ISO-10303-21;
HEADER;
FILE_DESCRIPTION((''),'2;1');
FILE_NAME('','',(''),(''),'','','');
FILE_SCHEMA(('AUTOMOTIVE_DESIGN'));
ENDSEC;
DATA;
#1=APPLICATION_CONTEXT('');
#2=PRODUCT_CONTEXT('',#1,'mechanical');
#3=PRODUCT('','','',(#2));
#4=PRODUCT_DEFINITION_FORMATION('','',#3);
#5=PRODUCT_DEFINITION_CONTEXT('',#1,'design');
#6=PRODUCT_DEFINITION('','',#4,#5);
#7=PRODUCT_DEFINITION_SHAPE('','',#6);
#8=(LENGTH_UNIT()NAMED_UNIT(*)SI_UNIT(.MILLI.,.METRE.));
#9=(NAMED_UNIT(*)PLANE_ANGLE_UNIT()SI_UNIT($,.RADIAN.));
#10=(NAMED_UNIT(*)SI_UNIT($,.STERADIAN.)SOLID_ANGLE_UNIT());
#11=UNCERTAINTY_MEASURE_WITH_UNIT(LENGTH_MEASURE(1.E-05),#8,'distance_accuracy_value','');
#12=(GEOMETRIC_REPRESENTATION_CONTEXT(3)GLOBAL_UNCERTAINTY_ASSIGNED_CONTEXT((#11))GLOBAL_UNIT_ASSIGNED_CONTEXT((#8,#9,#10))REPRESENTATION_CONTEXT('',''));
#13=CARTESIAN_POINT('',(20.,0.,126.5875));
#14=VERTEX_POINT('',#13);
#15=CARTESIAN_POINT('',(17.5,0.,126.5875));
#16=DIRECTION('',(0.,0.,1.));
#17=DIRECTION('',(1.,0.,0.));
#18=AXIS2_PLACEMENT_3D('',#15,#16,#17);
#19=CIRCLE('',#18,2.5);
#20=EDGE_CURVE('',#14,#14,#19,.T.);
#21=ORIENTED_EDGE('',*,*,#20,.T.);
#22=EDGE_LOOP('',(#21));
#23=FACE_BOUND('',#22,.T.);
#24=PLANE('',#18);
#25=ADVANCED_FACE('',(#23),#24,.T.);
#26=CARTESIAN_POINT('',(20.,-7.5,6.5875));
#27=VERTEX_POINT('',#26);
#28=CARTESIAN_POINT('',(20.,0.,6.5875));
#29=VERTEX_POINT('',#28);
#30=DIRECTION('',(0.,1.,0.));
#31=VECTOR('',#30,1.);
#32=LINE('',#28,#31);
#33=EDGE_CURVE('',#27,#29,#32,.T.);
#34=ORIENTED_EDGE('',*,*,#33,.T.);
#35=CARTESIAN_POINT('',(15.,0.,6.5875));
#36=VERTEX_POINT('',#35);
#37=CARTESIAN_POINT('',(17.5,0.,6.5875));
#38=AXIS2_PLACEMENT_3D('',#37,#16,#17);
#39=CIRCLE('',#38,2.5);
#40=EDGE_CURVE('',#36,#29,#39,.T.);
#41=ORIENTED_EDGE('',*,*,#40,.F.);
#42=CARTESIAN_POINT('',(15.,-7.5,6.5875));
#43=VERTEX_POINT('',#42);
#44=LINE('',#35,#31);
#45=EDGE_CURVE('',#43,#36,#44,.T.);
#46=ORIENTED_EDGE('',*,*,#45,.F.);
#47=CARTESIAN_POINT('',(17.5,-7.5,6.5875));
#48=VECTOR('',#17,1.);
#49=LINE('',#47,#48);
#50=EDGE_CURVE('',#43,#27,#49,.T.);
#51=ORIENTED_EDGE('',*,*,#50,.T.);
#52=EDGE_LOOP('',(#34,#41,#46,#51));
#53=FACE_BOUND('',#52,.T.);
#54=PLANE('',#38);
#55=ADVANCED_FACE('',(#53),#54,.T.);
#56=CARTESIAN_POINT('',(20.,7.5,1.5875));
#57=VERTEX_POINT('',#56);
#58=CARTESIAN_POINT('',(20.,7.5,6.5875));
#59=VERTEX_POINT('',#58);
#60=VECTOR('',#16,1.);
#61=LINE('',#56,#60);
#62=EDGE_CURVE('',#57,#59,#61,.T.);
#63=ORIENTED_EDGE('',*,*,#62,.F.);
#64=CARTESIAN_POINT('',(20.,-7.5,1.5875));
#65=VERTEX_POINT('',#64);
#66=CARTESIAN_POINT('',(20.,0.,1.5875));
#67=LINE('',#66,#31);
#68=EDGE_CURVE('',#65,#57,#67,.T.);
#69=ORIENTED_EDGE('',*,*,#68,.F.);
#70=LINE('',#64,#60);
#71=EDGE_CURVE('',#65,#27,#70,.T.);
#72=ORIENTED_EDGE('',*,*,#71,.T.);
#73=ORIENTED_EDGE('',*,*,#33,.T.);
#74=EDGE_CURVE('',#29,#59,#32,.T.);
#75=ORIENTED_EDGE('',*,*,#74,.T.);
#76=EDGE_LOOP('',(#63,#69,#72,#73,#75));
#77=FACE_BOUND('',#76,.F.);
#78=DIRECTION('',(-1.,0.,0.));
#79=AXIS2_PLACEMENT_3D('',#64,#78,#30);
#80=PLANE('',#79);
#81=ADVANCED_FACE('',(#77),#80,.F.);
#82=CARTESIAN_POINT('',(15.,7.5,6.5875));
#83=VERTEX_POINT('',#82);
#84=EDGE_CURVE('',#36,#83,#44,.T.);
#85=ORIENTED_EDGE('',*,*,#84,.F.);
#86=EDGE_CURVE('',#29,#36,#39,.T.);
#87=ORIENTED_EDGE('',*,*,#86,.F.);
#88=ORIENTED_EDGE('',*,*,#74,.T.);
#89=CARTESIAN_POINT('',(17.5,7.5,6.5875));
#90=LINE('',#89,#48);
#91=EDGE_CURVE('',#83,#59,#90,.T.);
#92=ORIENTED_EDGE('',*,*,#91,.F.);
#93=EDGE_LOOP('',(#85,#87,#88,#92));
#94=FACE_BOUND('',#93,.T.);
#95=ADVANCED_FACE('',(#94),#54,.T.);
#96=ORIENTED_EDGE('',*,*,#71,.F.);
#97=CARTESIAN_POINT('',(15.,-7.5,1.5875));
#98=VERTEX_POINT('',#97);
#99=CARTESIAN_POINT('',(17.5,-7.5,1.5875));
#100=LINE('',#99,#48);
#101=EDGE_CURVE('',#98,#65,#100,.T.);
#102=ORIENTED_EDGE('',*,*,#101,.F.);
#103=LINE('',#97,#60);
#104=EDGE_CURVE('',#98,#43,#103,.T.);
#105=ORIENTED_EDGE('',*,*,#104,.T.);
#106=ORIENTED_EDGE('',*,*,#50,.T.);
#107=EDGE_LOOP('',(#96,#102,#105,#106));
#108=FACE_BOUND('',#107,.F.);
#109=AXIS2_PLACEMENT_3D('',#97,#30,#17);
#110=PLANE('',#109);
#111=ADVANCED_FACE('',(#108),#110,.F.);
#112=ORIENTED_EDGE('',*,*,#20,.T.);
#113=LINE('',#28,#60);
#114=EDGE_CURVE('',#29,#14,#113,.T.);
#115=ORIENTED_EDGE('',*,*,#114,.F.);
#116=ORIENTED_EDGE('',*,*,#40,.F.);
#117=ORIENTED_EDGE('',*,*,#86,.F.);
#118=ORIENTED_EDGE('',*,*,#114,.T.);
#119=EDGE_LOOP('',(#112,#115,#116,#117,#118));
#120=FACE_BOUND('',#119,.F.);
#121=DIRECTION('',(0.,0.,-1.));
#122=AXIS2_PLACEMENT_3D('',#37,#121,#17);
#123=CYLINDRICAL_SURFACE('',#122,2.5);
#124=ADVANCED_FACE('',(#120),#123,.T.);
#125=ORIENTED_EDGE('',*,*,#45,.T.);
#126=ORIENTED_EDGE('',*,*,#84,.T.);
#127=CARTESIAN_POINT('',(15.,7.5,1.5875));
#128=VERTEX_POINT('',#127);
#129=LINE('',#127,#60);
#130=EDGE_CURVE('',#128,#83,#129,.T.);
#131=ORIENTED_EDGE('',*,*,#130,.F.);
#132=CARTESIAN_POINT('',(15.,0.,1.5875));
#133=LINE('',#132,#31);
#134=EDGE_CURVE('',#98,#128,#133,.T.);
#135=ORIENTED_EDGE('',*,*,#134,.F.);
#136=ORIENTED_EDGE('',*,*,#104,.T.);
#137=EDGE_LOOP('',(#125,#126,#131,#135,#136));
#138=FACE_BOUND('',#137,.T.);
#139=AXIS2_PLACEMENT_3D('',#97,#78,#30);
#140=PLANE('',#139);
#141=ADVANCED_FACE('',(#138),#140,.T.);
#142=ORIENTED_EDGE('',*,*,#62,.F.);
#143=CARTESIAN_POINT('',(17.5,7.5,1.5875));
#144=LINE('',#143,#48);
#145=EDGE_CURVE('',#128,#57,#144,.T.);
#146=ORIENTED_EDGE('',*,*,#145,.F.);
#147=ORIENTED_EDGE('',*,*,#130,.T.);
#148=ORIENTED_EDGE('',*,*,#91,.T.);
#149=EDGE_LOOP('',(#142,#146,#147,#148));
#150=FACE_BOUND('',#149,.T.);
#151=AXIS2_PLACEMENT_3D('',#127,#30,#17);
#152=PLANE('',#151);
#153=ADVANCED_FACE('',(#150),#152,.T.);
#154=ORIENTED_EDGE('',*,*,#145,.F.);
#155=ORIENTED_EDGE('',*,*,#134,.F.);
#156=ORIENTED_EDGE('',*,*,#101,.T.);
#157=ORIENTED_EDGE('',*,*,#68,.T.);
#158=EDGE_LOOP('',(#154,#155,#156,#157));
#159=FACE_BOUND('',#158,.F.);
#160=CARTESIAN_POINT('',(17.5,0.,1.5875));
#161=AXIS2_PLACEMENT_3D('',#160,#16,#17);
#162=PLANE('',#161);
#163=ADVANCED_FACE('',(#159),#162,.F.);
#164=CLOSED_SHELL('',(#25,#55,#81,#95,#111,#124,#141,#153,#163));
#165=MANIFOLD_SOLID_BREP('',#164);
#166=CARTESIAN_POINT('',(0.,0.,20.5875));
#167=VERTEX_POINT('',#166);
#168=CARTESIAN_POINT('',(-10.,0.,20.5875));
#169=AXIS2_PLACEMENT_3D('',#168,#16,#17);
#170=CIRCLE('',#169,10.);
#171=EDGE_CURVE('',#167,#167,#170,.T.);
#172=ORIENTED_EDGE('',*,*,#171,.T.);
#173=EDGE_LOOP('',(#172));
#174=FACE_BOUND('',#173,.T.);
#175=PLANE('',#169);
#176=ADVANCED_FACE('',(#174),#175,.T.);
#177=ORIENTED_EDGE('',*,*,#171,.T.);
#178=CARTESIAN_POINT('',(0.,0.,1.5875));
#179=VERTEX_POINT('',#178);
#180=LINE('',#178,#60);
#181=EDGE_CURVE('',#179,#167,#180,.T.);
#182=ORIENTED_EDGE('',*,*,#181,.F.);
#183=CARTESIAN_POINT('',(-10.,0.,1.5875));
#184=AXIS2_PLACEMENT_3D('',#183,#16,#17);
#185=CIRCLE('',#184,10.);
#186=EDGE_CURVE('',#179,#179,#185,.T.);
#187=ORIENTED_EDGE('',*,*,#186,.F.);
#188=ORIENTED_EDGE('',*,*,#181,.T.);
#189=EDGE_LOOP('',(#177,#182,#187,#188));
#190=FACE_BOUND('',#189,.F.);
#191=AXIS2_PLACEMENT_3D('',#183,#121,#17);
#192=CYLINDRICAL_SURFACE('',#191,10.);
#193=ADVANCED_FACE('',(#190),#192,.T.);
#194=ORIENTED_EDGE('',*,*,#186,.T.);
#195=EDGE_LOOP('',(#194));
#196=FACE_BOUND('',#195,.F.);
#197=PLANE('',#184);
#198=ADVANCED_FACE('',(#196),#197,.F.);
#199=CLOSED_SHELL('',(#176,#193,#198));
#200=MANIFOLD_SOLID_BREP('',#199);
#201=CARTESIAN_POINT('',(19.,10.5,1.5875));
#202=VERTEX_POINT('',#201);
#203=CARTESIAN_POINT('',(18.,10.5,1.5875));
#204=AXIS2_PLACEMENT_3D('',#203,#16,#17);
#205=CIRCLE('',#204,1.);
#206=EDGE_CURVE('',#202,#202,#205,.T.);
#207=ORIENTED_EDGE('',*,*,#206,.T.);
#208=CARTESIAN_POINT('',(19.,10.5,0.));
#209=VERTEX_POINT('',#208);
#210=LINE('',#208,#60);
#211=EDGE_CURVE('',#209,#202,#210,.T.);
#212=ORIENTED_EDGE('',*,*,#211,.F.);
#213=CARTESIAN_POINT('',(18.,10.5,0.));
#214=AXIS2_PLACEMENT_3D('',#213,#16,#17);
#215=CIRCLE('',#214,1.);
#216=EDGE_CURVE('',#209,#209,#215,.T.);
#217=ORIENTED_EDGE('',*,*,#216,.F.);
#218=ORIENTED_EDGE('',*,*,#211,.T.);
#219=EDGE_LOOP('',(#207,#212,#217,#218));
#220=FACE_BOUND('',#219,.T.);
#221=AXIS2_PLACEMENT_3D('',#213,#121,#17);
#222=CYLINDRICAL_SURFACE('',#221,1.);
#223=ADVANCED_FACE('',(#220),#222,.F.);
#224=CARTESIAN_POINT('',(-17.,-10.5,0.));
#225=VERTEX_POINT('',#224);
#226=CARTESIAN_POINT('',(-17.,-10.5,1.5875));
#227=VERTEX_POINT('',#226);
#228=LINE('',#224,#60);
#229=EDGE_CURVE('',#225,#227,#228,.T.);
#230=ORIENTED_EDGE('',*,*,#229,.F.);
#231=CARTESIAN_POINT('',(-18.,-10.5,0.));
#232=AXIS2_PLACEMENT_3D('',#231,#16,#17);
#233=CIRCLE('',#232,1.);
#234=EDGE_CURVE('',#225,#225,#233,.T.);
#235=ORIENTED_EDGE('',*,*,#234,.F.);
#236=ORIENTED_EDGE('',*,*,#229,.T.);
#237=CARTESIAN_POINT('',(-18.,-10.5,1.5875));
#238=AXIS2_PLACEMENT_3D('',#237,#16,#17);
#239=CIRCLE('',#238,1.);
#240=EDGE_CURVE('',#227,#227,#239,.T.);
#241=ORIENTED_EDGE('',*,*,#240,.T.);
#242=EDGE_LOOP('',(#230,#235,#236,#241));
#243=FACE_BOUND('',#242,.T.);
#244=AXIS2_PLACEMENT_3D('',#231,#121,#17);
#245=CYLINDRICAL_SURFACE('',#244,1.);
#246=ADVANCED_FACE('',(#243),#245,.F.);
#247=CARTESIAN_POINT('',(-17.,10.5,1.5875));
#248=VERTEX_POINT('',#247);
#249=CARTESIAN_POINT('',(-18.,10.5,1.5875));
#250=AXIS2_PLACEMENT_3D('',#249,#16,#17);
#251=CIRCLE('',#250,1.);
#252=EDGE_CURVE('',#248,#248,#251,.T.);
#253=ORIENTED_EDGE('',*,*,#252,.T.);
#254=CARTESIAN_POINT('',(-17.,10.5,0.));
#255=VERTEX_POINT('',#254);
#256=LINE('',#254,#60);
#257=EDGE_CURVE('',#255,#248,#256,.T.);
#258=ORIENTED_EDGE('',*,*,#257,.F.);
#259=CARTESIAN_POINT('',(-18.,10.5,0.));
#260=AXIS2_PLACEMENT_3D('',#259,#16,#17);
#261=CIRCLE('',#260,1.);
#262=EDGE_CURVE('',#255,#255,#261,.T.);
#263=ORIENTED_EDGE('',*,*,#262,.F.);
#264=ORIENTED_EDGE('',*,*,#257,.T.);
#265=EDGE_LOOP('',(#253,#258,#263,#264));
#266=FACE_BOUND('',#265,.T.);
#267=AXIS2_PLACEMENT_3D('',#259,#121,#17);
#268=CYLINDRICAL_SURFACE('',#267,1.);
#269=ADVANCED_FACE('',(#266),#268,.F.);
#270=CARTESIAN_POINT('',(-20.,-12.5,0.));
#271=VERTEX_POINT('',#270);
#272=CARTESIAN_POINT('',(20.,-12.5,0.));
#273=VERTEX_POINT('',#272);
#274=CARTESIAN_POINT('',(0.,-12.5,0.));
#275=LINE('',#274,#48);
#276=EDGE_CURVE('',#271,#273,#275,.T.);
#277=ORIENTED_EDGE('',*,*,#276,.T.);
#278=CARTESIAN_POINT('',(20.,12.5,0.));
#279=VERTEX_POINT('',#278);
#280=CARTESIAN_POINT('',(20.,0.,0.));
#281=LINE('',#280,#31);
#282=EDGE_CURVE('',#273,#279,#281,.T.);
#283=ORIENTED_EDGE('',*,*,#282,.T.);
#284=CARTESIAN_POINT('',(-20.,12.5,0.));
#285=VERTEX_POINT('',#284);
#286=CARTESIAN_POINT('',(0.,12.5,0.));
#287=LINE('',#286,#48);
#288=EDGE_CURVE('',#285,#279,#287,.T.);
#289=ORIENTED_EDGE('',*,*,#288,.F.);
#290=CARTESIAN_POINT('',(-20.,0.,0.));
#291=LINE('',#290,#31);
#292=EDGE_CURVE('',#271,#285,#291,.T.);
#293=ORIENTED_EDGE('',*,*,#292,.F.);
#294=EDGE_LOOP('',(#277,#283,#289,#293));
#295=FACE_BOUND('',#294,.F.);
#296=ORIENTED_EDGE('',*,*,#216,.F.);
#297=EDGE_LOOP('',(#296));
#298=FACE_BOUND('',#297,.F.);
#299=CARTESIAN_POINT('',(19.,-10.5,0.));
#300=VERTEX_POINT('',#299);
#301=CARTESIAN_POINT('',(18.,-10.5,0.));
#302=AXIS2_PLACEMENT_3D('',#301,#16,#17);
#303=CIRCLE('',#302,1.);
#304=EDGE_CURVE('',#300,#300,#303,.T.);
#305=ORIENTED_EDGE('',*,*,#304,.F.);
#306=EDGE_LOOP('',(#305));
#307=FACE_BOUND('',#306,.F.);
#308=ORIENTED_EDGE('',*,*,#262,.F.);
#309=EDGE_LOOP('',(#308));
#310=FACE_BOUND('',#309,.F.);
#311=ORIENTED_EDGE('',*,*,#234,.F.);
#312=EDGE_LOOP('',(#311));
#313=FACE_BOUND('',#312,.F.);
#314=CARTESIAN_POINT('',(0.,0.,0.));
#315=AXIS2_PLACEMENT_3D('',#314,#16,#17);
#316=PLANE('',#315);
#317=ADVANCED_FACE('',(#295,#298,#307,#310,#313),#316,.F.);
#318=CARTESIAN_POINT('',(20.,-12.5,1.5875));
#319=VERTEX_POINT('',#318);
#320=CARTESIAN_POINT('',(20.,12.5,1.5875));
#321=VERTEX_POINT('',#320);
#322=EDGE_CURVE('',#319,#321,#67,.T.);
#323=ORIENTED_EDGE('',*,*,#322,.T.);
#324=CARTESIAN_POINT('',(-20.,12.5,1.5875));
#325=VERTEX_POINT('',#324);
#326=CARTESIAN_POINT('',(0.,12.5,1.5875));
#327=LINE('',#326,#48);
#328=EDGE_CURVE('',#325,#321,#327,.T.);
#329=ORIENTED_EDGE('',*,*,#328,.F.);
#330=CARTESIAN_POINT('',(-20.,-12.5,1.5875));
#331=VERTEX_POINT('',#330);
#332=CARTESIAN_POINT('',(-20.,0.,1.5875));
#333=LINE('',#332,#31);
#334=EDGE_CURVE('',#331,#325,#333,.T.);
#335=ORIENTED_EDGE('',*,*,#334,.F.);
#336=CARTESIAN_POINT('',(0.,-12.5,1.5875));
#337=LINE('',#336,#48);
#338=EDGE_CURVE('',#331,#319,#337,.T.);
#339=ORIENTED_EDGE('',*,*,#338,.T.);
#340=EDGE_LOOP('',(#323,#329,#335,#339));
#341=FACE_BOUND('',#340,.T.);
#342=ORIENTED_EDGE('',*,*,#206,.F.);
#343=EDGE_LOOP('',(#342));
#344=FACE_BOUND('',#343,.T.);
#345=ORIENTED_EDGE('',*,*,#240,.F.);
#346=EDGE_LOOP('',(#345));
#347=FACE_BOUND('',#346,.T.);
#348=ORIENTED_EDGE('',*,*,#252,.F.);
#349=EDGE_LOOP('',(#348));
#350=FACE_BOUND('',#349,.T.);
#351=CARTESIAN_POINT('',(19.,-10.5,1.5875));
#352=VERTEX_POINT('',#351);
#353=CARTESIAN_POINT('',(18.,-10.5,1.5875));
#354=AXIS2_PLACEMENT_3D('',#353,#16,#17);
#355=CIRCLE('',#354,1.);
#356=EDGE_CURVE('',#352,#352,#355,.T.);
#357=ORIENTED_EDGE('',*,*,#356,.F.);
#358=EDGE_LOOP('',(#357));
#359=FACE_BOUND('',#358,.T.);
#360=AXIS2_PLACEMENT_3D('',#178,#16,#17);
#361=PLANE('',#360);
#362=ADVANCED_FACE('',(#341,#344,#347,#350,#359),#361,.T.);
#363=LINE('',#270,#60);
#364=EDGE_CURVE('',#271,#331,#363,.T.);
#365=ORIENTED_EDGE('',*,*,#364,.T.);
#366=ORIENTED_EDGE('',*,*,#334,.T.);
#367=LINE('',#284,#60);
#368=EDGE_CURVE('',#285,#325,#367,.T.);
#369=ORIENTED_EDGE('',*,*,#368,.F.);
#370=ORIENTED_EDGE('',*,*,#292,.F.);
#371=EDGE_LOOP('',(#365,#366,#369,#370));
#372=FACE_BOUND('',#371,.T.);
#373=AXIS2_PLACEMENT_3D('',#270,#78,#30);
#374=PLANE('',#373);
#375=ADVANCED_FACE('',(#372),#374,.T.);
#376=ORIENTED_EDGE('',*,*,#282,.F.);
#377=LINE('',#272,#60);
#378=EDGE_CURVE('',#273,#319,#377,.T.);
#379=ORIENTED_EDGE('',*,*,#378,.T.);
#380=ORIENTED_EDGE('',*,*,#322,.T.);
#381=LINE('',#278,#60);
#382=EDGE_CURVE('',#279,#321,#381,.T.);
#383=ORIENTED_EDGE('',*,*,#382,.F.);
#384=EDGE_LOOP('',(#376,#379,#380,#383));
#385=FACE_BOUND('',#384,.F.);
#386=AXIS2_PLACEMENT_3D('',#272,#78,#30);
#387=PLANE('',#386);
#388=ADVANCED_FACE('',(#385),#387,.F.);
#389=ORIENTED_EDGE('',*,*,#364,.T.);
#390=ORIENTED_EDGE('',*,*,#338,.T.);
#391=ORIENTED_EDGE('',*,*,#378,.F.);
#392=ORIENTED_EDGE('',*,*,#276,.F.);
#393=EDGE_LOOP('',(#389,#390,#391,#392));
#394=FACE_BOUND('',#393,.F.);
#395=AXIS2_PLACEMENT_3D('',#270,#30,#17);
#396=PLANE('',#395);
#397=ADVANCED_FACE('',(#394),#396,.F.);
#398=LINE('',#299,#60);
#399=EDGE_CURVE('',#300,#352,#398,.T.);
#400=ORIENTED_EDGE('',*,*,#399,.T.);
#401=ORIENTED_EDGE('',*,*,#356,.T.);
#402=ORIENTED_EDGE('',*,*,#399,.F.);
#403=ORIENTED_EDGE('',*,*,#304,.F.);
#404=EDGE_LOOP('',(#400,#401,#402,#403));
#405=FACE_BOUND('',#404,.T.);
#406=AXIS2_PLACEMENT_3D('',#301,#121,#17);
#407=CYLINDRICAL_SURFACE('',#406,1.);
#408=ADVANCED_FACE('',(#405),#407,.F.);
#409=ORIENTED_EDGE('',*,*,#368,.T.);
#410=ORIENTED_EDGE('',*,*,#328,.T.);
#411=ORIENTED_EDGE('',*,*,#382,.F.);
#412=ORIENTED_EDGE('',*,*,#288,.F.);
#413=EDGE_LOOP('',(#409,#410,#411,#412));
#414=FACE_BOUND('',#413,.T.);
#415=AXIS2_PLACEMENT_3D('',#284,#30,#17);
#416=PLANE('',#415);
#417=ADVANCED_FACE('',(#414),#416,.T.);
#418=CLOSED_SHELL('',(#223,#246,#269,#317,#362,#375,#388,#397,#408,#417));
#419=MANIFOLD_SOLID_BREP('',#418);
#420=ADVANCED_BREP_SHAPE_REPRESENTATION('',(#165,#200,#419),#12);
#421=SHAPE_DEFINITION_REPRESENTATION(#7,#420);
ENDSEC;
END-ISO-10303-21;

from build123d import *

# Parameters (mm, degrees)
F0_W     = 40
F0_H     = 25
F0_R     = 1
F1_DEPTH = 1.5875
F2_R     = 10
F3_DEPTH = 19
F4_W     = 5
F4_H     = 15
F5_DEPTH = 5
F6_R     = 2.5
F7_DEPTH = 120


# Not quite as in the source:
# - a length typed as a fraction of an inch, garbled in the dataset ("3 / 203.2 mm" for 3/8 in), is restored


with BuildPart() as f1:
    # F0 (on Top) → F1 (new body)
    with BuildSketch(Plane.XY):
        Rectangle(F0_W, F0_H)
        with Locations((-18, -10.5)):
            Circle(F0_R, mode=Mode.SUBTRACT)
        with Locations((18, -10.5)):
            Circle(F0_R, mode=Mode.SUBTRACT)
        with Locations((-18, 10.5)):
            Circle(F0_R, mode=Mode.SUBTRACT)
        with Locations((18, 10.5)):
            Circle(F0_R, mode=Mode.SUBTRACT)
    extrude(amount=F1_DEPTH)


with BuildPart() as f3:
    # F2 (on face) → F3 (new body)
    with BuildSketch(Plane.XY.offset(1.5875)):
        with Locations((-10, 0)):
            Circle(F2_R)
    extrude(amount=F3_DEPTH)


with BuildPart() as f5:
    # F4 (on face) → F5 (new body)
    with BuildSketch(Plane.XY.offset(1.5875)):
        with Locations((17.5, 0)):
            Rectangle(F4_W, F4_H)
    extrude(amount=F5_DEPTH)

    # F6 (on face) → F7 (join)
    with BuildSketch(Plane.XY.offset(6.5875)):
        with Locations((17.5, 0)):
            Circle(F6_R)
    extrude(amount=F7_DEPTH)


solid = Compound([f1.part, f3.part, f5.part])
